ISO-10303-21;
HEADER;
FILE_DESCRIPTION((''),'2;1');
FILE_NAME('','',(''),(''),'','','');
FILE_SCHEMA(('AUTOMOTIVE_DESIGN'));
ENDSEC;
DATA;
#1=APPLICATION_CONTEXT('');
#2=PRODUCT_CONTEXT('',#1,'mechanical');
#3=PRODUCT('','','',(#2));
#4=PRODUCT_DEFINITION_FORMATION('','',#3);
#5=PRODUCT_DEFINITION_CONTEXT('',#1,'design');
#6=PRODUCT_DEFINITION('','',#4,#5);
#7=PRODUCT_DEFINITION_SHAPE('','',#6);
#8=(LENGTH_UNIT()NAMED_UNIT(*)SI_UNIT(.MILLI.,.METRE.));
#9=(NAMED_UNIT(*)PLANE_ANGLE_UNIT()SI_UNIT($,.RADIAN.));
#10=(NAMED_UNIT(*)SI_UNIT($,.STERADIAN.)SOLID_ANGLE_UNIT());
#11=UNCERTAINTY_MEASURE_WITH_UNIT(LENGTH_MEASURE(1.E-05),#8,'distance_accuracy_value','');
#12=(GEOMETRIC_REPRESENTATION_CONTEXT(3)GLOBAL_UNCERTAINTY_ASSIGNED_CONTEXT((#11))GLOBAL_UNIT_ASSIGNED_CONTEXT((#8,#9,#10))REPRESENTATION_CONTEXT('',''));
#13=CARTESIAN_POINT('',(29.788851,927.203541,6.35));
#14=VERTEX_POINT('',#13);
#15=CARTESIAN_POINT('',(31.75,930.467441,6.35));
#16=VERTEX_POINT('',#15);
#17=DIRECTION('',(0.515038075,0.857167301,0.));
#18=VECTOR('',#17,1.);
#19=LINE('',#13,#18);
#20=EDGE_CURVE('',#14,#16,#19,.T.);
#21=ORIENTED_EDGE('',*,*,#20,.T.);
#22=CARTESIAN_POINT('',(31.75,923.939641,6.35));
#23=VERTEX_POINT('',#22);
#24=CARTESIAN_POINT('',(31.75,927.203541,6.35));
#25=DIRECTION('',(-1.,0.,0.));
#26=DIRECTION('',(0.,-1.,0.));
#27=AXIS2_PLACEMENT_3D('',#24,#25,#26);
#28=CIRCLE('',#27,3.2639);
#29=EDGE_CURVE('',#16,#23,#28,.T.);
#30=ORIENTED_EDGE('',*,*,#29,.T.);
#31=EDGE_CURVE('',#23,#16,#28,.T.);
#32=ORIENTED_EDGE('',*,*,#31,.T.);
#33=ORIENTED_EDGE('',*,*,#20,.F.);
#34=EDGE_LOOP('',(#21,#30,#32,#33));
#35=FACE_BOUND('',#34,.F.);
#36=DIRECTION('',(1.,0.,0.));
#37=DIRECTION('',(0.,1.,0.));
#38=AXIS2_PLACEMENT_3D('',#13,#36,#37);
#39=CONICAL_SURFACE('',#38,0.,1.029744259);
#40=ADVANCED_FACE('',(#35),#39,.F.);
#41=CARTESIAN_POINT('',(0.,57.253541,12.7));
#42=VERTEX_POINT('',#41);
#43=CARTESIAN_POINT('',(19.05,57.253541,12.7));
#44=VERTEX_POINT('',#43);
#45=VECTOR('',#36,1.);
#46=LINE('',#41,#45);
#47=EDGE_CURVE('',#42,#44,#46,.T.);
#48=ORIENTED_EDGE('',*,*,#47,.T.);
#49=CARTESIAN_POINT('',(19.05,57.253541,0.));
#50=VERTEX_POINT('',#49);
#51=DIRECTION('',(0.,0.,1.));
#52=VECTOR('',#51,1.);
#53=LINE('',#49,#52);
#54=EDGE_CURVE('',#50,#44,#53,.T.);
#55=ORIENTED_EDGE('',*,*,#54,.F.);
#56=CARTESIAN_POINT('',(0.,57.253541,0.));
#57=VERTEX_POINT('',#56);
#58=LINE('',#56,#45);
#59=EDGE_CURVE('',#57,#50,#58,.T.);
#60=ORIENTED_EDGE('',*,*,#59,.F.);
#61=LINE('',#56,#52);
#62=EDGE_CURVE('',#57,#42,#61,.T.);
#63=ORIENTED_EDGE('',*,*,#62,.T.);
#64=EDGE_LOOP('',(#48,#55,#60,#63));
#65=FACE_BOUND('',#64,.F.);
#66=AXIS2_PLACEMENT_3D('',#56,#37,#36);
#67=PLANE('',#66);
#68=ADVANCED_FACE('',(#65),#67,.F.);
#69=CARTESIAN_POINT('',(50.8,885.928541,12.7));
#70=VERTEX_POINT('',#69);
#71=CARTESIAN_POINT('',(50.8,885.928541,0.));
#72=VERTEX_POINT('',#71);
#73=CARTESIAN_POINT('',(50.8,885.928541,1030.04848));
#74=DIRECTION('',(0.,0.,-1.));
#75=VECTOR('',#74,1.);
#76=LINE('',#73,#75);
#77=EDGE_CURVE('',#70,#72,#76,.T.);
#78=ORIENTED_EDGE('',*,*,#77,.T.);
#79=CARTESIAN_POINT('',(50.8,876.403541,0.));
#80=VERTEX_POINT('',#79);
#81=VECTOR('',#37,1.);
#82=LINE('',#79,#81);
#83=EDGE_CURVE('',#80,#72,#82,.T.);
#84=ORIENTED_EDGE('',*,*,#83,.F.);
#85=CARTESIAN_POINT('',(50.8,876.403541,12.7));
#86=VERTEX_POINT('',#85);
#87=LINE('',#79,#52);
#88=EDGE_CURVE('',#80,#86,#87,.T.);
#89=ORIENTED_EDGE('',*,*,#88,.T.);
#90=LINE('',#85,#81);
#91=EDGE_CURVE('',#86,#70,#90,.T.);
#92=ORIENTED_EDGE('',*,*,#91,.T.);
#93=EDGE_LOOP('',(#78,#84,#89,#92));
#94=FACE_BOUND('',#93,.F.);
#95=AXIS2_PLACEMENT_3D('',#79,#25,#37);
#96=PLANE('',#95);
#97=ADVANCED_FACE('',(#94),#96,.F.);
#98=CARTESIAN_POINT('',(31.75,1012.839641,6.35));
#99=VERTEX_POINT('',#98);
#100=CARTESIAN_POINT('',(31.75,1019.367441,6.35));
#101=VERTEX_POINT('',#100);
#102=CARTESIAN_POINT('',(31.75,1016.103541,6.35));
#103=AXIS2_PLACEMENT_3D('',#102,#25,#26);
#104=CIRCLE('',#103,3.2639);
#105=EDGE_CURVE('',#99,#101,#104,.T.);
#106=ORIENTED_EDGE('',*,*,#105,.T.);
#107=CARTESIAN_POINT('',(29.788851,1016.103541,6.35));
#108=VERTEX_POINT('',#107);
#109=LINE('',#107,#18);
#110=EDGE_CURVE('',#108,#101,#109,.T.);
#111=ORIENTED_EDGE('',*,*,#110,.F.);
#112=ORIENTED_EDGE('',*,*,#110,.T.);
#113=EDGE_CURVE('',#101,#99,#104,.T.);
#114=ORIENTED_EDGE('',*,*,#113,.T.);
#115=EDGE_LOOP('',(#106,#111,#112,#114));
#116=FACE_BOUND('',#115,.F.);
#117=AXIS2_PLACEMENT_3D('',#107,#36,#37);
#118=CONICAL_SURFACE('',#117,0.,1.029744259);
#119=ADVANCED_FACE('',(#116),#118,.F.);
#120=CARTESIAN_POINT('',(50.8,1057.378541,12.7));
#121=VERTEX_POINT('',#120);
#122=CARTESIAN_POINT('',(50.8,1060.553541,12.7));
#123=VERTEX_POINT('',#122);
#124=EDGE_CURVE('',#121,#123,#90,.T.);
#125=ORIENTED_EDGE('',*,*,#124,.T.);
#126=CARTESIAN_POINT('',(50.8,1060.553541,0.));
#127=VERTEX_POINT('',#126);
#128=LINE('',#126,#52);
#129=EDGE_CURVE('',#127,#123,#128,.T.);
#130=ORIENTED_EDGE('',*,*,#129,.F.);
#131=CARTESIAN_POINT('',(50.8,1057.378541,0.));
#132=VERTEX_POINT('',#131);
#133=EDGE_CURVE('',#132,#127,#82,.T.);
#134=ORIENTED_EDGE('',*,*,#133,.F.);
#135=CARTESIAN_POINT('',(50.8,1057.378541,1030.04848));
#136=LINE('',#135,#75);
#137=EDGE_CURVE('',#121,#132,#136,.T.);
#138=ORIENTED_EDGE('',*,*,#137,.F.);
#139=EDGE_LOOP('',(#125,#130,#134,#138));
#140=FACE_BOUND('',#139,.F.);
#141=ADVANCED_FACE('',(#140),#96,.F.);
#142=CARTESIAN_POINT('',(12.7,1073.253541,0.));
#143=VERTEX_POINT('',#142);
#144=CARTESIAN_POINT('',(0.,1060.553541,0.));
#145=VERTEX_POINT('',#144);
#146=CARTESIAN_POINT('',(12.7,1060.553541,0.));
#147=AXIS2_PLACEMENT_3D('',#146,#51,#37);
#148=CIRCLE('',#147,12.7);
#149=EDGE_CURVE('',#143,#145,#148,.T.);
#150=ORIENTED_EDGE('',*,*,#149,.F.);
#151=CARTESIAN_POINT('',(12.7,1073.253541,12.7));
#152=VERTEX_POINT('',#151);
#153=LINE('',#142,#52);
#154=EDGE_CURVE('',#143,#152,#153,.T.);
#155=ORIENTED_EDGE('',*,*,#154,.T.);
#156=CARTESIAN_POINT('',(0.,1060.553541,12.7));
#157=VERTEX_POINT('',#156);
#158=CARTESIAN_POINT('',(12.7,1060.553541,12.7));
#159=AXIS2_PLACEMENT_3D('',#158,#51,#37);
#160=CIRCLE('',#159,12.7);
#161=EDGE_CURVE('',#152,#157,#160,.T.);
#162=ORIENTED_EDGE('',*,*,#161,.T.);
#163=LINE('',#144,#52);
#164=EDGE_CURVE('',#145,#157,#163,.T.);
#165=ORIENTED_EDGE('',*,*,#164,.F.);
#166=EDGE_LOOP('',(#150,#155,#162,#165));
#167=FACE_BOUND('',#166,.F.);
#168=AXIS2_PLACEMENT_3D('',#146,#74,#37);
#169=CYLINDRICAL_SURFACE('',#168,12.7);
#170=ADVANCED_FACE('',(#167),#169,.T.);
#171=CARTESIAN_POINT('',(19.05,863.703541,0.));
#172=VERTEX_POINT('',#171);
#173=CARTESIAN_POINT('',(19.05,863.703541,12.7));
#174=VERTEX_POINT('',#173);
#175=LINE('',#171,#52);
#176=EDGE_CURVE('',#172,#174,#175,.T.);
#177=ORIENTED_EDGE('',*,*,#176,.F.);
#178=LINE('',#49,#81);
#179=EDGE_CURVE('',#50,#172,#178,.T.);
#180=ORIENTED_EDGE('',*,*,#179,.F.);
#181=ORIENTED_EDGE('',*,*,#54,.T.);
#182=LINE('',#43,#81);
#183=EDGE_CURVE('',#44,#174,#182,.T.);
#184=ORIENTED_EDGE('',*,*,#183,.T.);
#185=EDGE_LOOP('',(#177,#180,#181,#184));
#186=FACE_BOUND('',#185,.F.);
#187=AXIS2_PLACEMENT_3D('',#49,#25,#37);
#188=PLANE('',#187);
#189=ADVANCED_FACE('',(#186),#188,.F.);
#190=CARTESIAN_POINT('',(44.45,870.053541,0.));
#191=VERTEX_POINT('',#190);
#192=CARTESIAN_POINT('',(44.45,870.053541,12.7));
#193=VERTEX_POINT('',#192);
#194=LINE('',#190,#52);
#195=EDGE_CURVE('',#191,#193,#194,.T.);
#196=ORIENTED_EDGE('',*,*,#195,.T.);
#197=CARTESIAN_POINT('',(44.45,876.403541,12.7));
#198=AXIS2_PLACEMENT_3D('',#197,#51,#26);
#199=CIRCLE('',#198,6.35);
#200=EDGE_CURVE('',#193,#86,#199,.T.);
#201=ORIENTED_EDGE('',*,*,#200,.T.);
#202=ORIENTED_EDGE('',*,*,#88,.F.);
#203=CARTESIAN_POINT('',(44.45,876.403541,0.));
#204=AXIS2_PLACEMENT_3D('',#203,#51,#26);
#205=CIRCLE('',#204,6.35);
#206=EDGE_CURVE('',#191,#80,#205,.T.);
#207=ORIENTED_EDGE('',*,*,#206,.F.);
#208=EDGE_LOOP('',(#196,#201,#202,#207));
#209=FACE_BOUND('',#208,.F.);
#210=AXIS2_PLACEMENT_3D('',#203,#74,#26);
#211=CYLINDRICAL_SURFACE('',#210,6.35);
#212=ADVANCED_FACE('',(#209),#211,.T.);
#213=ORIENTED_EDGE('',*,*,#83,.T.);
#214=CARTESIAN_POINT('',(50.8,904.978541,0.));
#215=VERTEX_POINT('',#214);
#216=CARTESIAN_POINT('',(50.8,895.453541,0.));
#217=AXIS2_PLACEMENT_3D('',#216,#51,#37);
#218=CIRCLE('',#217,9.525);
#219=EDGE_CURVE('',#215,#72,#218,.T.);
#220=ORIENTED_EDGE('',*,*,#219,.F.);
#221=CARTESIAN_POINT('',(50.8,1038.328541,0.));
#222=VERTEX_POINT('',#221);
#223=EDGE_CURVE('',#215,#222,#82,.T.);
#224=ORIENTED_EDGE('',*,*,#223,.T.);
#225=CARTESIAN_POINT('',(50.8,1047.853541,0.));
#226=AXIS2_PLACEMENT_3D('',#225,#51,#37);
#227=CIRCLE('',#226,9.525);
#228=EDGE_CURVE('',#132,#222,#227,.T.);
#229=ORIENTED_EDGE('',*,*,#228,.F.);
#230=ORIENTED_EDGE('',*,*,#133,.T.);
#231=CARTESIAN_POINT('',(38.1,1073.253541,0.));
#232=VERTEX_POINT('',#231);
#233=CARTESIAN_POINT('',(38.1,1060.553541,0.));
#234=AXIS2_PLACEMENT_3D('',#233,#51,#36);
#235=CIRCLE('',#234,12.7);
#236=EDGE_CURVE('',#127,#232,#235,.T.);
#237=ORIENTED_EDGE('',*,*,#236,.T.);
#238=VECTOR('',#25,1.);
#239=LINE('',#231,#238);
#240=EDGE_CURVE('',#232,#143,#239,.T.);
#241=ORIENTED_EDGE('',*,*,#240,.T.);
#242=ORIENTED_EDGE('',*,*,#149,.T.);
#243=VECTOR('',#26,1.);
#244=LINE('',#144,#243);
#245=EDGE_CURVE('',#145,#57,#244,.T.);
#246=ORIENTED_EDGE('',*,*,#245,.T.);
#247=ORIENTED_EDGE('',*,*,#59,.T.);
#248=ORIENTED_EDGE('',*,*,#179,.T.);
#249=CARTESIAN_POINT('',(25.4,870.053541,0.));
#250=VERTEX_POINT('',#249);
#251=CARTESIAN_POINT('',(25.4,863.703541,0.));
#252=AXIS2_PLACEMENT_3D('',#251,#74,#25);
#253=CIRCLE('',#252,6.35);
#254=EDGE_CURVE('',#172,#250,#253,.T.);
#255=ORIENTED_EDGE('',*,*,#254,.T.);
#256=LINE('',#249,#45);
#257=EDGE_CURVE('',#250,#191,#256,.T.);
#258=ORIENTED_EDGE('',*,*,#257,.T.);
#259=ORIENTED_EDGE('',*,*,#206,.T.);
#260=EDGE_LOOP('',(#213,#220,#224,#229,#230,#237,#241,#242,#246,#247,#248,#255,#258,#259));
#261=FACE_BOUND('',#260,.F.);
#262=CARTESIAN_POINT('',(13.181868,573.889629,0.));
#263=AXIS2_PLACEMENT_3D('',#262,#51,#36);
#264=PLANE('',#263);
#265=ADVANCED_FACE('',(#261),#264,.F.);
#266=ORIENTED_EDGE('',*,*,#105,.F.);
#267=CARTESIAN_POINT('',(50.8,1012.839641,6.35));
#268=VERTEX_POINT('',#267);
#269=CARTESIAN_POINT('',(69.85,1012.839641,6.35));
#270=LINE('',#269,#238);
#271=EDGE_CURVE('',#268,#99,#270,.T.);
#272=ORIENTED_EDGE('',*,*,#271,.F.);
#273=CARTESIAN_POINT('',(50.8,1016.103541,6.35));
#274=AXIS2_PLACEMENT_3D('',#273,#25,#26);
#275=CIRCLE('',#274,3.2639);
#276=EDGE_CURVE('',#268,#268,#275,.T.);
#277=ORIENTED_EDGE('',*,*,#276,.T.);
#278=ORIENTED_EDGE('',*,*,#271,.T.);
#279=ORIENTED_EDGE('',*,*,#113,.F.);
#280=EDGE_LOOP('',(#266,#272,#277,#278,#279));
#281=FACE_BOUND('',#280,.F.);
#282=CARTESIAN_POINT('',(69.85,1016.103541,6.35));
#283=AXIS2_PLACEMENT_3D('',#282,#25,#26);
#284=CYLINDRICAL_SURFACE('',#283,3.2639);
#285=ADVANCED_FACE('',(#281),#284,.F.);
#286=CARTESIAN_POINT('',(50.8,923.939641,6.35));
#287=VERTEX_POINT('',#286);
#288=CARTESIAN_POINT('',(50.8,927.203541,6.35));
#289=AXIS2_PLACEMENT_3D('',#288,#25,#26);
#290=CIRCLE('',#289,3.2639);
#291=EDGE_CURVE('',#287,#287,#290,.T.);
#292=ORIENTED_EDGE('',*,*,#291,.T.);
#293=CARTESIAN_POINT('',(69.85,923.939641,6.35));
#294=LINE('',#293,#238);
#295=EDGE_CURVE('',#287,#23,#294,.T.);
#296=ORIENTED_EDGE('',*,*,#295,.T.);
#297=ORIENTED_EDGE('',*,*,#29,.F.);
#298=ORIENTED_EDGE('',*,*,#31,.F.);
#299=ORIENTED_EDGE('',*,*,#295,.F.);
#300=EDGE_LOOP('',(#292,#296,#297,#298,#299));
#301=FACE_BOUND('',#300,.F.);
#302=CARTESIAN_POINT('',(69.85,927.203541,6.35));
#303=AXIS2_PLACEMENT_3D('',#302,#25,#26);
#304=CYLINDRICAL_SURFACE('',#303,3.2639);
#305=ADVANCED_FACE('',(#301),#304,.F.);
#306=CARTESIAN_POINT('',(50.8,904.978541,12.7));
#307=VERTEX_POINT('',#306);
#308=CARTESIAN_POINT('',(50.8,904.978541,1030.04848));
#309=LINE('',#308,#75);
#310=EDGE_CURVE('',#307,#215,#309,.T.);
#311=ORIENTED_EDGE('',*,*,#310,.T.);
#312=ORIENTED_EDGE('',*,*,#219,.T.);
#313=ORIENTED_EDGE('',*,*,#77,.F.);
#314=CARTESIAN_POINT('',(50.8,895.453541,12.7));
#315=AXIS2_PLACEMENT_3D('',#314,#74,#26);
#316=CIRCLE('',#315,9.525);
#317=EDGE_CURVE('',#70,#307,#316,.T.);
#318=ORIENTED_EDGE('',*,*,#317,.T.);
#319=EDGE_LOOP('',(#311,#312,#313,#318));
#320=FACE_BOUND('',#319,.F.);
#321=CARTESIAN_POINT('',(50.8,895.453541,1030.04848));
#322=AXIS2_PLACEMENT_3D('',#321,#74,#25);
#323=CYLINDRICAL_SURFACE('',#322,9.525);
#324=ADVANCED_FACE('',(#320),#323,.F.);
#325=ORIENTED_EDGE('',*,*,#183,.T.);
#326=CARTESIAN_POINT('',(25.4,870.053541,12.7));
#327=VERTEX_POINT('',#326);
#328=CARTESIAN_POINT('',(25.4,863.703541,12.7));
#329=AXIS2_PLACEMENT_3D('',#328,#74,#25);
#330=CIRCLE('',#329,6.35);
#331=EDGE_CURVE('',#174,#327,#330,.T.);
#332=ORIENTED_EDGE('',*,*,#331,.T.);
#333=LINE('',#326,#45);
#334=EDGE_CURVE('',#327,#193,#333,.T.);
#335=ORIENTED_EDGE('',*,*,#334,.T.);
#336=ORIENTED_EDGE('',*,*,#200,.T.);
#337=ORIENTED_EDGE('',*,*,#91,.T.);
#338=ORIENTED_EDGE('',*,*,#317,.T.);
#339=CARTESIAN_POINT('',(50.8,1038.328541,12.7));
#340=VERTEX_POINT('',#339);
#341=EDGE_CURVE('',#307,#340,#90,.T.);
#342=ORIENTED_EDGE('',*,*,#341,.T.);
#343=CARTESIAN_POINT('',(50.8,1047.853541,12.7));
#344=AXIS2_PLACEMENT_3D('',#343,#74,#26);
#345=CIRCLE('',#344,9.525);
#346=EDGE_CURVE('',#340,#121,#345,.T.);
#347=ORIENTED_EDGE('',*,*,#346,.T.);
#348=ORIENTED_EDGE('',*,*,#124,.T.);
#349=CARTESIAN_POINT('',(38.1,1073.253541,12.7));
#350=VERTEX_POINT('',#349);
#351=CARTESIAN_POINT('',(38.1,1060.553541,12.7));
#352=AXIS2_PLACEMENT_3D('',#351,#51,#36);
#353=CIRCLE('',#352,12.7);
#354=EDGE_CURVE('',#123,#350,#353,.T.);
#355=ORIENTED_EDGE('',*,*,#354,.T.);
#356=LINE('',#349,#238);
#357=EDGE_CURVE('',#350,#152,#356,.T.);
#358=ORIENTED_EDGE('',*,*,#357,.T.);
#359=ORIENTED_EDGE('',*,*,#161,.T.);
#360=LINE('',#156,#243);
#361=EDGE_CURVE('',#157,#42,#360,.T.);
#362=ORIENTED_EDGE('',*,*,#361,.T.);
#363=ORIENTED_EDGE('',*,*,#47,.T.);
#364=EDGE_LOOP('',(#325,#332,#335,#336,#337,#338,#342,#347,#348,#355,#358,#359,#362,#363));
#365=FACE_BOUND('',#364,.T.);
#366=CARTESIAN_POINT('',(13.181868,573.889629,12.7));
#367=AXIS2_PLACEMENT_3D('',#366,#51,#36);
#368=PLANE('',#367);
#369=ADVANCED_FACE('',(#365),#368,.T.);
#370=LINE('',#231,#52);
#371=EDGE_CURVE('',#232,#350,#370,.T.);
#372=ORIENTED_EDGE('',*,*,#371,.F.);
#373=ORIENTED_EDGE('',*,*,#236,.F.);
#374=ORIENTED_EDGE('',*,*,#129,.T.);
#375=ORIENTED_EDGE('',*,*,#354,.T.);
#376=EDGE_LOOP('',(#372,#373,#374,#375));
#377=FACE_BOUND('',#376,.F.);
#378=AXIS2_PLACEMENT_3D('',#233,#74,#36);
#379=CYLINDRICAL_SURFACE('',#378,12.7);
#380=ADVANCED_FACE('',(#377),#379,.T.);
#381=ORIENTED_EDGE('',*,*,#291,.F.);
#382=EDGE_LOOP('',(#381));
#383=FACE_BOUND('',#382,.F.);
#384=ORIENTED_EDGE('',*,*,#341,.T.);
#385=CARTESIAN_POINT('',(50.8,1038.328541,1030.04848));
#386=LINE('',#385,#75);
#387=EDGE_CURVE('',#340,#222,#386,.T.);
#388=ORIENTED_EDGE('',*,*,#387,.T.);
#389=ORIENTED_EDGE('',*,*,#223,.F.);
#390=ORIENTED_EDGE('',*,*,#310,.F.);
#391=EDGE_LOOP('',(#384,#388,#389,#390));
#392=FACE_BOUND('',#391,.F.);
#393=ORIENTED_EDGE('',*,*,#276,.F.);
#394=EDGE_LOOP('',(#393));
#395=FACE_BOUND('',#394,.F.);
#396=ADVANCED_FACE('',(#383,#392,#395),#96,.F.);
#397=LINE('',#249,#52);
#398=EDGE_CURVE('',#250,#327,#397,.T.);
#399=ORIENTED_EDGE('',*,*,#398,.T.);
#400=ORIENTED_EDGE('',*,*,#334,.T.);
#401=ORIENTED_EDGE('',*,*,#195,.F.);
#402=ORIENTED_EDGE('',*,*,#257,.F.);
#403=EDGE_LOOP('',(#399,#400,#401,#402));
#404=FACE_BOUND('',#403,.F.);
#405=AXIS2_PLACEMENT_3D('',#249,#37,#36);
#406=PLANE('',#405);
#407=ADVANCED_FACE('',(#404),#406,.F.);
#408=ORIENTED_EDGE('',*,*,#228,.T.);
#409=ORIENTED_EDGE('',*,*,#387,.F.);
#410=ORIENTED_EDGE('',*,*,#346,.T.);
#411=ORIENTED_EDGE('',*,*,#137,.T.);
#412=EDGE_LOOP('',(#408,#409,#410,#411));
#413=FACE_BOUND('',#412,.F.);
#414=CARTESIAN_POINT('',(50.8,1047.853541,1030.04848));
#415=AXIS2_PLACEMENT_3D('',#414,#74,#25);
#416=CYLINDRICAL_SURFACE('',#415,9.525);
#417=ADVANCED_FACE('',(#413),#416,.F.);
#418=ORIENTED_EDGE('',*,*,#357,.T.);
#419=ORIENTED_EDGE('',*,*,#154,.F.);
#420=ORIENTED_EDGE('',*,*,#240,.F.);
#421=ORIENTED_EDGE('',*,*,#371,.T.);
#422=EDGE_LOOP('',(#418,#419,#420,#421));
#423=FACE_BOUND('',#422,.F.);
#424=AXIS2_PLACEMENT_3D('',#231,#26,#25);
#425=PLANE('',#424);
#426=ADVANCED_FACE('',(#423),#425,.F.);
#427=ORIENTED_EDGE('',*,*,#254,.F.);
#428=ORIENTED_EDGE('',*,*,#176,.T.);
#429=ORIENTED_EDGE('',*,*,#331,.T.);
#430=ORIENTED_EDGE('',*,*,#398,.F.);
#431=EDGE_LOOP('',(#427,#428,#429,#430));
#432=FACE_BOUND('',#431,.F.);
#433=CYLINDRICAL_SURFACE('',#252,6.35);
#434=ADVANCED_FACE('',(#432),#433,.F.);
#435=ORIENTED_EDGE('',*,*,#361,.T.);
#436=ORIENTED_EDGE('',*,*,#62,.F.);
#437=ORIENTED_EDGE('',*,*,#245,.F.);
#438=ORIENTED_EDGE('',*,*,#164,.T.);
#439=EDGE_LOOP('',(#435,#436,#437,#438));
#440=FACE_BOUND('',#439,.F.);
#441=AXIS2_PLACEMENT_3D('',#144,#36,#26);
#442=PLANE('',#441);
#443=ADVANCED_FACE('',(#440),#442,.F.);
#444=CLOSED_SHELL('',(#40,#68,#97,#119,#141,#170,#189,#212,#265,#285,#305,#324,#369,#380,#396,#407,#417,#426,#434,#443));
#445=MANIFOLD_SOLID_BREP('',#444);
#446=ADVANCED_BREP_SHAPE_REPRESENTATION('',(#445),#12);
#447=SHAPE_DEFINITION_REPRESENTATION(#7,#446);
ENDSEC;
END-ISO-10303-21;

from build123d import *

# Parameters (mm, degrees)
F1_DEPTH = 12.7
F3_D     = 19.05
F5_D     = 6.5278
F5_DEPTH = 19.05
F5_TIP   = 1.9611489744


# Not quite as in the source:
# - a feature names something its author has since deleted; it is built from what else it names


with BuildPart() as f1:
    # F0 (on Top) → F1 (new body)
    with BuildSketch(Plane.XY):
        with BuildLine():
            Line((38.1, 1073.25354091), (12.7, 1073.25354091))
            ThreePointArc((12.7, 1073.25354091), (3.7197438789, 1069.5337970311), (0, 1060.55354091))
            Line((0, 1060.55354091), (0, 57.25354091))
            Line((0, 57.25354091), (19.05, 57.25354091))
            Line((19.05, 57.25354091), (19.05, 863.70354091))
            ThreePointArc((19.05, 863.70354091), (20.9098719395, 868.1936689706), (25.4, 870.05354091))
            Line((25.4, 870.05354091), (44.45, 870.05354091))
            ThreePointArc((44.45, 870.05354091), (48.9401280605, 871.9134128495), (50.8, 876.40354091))
            Line((50.8, 876.40354091), (50.8, 1060.55354091))
            ThreePointArc((50.8, 1060.55354091), (47.0802561211, 1069.5337970311), (38.1, 1073.25354091))
        make_face()
    extrude(amount=F1_DEPTH)

    # F3 (through all)
    with Locations(Plane.XY.offset(12.7)):
        with Locations((50.8, 1047.85354091), (50.8, 895.45354091)):
            Hole(F3_D / 2)

    # F5
    with Locations(Plane.YZ.offset(50.8)):
        with Locations((1016.10354091, 6.35), (927.20354091, 6.35)):
            Hole(F5_D / 2, depth=F5_DEPTH)
            with Locations((0, 0, -(F5_DEPTH + F5_TIP / 2))):  # 118° drill point
                Cone(0, F5_D / 2, F5_TIP, mode=Mode.SUBTRACT)


solid = f1.part
